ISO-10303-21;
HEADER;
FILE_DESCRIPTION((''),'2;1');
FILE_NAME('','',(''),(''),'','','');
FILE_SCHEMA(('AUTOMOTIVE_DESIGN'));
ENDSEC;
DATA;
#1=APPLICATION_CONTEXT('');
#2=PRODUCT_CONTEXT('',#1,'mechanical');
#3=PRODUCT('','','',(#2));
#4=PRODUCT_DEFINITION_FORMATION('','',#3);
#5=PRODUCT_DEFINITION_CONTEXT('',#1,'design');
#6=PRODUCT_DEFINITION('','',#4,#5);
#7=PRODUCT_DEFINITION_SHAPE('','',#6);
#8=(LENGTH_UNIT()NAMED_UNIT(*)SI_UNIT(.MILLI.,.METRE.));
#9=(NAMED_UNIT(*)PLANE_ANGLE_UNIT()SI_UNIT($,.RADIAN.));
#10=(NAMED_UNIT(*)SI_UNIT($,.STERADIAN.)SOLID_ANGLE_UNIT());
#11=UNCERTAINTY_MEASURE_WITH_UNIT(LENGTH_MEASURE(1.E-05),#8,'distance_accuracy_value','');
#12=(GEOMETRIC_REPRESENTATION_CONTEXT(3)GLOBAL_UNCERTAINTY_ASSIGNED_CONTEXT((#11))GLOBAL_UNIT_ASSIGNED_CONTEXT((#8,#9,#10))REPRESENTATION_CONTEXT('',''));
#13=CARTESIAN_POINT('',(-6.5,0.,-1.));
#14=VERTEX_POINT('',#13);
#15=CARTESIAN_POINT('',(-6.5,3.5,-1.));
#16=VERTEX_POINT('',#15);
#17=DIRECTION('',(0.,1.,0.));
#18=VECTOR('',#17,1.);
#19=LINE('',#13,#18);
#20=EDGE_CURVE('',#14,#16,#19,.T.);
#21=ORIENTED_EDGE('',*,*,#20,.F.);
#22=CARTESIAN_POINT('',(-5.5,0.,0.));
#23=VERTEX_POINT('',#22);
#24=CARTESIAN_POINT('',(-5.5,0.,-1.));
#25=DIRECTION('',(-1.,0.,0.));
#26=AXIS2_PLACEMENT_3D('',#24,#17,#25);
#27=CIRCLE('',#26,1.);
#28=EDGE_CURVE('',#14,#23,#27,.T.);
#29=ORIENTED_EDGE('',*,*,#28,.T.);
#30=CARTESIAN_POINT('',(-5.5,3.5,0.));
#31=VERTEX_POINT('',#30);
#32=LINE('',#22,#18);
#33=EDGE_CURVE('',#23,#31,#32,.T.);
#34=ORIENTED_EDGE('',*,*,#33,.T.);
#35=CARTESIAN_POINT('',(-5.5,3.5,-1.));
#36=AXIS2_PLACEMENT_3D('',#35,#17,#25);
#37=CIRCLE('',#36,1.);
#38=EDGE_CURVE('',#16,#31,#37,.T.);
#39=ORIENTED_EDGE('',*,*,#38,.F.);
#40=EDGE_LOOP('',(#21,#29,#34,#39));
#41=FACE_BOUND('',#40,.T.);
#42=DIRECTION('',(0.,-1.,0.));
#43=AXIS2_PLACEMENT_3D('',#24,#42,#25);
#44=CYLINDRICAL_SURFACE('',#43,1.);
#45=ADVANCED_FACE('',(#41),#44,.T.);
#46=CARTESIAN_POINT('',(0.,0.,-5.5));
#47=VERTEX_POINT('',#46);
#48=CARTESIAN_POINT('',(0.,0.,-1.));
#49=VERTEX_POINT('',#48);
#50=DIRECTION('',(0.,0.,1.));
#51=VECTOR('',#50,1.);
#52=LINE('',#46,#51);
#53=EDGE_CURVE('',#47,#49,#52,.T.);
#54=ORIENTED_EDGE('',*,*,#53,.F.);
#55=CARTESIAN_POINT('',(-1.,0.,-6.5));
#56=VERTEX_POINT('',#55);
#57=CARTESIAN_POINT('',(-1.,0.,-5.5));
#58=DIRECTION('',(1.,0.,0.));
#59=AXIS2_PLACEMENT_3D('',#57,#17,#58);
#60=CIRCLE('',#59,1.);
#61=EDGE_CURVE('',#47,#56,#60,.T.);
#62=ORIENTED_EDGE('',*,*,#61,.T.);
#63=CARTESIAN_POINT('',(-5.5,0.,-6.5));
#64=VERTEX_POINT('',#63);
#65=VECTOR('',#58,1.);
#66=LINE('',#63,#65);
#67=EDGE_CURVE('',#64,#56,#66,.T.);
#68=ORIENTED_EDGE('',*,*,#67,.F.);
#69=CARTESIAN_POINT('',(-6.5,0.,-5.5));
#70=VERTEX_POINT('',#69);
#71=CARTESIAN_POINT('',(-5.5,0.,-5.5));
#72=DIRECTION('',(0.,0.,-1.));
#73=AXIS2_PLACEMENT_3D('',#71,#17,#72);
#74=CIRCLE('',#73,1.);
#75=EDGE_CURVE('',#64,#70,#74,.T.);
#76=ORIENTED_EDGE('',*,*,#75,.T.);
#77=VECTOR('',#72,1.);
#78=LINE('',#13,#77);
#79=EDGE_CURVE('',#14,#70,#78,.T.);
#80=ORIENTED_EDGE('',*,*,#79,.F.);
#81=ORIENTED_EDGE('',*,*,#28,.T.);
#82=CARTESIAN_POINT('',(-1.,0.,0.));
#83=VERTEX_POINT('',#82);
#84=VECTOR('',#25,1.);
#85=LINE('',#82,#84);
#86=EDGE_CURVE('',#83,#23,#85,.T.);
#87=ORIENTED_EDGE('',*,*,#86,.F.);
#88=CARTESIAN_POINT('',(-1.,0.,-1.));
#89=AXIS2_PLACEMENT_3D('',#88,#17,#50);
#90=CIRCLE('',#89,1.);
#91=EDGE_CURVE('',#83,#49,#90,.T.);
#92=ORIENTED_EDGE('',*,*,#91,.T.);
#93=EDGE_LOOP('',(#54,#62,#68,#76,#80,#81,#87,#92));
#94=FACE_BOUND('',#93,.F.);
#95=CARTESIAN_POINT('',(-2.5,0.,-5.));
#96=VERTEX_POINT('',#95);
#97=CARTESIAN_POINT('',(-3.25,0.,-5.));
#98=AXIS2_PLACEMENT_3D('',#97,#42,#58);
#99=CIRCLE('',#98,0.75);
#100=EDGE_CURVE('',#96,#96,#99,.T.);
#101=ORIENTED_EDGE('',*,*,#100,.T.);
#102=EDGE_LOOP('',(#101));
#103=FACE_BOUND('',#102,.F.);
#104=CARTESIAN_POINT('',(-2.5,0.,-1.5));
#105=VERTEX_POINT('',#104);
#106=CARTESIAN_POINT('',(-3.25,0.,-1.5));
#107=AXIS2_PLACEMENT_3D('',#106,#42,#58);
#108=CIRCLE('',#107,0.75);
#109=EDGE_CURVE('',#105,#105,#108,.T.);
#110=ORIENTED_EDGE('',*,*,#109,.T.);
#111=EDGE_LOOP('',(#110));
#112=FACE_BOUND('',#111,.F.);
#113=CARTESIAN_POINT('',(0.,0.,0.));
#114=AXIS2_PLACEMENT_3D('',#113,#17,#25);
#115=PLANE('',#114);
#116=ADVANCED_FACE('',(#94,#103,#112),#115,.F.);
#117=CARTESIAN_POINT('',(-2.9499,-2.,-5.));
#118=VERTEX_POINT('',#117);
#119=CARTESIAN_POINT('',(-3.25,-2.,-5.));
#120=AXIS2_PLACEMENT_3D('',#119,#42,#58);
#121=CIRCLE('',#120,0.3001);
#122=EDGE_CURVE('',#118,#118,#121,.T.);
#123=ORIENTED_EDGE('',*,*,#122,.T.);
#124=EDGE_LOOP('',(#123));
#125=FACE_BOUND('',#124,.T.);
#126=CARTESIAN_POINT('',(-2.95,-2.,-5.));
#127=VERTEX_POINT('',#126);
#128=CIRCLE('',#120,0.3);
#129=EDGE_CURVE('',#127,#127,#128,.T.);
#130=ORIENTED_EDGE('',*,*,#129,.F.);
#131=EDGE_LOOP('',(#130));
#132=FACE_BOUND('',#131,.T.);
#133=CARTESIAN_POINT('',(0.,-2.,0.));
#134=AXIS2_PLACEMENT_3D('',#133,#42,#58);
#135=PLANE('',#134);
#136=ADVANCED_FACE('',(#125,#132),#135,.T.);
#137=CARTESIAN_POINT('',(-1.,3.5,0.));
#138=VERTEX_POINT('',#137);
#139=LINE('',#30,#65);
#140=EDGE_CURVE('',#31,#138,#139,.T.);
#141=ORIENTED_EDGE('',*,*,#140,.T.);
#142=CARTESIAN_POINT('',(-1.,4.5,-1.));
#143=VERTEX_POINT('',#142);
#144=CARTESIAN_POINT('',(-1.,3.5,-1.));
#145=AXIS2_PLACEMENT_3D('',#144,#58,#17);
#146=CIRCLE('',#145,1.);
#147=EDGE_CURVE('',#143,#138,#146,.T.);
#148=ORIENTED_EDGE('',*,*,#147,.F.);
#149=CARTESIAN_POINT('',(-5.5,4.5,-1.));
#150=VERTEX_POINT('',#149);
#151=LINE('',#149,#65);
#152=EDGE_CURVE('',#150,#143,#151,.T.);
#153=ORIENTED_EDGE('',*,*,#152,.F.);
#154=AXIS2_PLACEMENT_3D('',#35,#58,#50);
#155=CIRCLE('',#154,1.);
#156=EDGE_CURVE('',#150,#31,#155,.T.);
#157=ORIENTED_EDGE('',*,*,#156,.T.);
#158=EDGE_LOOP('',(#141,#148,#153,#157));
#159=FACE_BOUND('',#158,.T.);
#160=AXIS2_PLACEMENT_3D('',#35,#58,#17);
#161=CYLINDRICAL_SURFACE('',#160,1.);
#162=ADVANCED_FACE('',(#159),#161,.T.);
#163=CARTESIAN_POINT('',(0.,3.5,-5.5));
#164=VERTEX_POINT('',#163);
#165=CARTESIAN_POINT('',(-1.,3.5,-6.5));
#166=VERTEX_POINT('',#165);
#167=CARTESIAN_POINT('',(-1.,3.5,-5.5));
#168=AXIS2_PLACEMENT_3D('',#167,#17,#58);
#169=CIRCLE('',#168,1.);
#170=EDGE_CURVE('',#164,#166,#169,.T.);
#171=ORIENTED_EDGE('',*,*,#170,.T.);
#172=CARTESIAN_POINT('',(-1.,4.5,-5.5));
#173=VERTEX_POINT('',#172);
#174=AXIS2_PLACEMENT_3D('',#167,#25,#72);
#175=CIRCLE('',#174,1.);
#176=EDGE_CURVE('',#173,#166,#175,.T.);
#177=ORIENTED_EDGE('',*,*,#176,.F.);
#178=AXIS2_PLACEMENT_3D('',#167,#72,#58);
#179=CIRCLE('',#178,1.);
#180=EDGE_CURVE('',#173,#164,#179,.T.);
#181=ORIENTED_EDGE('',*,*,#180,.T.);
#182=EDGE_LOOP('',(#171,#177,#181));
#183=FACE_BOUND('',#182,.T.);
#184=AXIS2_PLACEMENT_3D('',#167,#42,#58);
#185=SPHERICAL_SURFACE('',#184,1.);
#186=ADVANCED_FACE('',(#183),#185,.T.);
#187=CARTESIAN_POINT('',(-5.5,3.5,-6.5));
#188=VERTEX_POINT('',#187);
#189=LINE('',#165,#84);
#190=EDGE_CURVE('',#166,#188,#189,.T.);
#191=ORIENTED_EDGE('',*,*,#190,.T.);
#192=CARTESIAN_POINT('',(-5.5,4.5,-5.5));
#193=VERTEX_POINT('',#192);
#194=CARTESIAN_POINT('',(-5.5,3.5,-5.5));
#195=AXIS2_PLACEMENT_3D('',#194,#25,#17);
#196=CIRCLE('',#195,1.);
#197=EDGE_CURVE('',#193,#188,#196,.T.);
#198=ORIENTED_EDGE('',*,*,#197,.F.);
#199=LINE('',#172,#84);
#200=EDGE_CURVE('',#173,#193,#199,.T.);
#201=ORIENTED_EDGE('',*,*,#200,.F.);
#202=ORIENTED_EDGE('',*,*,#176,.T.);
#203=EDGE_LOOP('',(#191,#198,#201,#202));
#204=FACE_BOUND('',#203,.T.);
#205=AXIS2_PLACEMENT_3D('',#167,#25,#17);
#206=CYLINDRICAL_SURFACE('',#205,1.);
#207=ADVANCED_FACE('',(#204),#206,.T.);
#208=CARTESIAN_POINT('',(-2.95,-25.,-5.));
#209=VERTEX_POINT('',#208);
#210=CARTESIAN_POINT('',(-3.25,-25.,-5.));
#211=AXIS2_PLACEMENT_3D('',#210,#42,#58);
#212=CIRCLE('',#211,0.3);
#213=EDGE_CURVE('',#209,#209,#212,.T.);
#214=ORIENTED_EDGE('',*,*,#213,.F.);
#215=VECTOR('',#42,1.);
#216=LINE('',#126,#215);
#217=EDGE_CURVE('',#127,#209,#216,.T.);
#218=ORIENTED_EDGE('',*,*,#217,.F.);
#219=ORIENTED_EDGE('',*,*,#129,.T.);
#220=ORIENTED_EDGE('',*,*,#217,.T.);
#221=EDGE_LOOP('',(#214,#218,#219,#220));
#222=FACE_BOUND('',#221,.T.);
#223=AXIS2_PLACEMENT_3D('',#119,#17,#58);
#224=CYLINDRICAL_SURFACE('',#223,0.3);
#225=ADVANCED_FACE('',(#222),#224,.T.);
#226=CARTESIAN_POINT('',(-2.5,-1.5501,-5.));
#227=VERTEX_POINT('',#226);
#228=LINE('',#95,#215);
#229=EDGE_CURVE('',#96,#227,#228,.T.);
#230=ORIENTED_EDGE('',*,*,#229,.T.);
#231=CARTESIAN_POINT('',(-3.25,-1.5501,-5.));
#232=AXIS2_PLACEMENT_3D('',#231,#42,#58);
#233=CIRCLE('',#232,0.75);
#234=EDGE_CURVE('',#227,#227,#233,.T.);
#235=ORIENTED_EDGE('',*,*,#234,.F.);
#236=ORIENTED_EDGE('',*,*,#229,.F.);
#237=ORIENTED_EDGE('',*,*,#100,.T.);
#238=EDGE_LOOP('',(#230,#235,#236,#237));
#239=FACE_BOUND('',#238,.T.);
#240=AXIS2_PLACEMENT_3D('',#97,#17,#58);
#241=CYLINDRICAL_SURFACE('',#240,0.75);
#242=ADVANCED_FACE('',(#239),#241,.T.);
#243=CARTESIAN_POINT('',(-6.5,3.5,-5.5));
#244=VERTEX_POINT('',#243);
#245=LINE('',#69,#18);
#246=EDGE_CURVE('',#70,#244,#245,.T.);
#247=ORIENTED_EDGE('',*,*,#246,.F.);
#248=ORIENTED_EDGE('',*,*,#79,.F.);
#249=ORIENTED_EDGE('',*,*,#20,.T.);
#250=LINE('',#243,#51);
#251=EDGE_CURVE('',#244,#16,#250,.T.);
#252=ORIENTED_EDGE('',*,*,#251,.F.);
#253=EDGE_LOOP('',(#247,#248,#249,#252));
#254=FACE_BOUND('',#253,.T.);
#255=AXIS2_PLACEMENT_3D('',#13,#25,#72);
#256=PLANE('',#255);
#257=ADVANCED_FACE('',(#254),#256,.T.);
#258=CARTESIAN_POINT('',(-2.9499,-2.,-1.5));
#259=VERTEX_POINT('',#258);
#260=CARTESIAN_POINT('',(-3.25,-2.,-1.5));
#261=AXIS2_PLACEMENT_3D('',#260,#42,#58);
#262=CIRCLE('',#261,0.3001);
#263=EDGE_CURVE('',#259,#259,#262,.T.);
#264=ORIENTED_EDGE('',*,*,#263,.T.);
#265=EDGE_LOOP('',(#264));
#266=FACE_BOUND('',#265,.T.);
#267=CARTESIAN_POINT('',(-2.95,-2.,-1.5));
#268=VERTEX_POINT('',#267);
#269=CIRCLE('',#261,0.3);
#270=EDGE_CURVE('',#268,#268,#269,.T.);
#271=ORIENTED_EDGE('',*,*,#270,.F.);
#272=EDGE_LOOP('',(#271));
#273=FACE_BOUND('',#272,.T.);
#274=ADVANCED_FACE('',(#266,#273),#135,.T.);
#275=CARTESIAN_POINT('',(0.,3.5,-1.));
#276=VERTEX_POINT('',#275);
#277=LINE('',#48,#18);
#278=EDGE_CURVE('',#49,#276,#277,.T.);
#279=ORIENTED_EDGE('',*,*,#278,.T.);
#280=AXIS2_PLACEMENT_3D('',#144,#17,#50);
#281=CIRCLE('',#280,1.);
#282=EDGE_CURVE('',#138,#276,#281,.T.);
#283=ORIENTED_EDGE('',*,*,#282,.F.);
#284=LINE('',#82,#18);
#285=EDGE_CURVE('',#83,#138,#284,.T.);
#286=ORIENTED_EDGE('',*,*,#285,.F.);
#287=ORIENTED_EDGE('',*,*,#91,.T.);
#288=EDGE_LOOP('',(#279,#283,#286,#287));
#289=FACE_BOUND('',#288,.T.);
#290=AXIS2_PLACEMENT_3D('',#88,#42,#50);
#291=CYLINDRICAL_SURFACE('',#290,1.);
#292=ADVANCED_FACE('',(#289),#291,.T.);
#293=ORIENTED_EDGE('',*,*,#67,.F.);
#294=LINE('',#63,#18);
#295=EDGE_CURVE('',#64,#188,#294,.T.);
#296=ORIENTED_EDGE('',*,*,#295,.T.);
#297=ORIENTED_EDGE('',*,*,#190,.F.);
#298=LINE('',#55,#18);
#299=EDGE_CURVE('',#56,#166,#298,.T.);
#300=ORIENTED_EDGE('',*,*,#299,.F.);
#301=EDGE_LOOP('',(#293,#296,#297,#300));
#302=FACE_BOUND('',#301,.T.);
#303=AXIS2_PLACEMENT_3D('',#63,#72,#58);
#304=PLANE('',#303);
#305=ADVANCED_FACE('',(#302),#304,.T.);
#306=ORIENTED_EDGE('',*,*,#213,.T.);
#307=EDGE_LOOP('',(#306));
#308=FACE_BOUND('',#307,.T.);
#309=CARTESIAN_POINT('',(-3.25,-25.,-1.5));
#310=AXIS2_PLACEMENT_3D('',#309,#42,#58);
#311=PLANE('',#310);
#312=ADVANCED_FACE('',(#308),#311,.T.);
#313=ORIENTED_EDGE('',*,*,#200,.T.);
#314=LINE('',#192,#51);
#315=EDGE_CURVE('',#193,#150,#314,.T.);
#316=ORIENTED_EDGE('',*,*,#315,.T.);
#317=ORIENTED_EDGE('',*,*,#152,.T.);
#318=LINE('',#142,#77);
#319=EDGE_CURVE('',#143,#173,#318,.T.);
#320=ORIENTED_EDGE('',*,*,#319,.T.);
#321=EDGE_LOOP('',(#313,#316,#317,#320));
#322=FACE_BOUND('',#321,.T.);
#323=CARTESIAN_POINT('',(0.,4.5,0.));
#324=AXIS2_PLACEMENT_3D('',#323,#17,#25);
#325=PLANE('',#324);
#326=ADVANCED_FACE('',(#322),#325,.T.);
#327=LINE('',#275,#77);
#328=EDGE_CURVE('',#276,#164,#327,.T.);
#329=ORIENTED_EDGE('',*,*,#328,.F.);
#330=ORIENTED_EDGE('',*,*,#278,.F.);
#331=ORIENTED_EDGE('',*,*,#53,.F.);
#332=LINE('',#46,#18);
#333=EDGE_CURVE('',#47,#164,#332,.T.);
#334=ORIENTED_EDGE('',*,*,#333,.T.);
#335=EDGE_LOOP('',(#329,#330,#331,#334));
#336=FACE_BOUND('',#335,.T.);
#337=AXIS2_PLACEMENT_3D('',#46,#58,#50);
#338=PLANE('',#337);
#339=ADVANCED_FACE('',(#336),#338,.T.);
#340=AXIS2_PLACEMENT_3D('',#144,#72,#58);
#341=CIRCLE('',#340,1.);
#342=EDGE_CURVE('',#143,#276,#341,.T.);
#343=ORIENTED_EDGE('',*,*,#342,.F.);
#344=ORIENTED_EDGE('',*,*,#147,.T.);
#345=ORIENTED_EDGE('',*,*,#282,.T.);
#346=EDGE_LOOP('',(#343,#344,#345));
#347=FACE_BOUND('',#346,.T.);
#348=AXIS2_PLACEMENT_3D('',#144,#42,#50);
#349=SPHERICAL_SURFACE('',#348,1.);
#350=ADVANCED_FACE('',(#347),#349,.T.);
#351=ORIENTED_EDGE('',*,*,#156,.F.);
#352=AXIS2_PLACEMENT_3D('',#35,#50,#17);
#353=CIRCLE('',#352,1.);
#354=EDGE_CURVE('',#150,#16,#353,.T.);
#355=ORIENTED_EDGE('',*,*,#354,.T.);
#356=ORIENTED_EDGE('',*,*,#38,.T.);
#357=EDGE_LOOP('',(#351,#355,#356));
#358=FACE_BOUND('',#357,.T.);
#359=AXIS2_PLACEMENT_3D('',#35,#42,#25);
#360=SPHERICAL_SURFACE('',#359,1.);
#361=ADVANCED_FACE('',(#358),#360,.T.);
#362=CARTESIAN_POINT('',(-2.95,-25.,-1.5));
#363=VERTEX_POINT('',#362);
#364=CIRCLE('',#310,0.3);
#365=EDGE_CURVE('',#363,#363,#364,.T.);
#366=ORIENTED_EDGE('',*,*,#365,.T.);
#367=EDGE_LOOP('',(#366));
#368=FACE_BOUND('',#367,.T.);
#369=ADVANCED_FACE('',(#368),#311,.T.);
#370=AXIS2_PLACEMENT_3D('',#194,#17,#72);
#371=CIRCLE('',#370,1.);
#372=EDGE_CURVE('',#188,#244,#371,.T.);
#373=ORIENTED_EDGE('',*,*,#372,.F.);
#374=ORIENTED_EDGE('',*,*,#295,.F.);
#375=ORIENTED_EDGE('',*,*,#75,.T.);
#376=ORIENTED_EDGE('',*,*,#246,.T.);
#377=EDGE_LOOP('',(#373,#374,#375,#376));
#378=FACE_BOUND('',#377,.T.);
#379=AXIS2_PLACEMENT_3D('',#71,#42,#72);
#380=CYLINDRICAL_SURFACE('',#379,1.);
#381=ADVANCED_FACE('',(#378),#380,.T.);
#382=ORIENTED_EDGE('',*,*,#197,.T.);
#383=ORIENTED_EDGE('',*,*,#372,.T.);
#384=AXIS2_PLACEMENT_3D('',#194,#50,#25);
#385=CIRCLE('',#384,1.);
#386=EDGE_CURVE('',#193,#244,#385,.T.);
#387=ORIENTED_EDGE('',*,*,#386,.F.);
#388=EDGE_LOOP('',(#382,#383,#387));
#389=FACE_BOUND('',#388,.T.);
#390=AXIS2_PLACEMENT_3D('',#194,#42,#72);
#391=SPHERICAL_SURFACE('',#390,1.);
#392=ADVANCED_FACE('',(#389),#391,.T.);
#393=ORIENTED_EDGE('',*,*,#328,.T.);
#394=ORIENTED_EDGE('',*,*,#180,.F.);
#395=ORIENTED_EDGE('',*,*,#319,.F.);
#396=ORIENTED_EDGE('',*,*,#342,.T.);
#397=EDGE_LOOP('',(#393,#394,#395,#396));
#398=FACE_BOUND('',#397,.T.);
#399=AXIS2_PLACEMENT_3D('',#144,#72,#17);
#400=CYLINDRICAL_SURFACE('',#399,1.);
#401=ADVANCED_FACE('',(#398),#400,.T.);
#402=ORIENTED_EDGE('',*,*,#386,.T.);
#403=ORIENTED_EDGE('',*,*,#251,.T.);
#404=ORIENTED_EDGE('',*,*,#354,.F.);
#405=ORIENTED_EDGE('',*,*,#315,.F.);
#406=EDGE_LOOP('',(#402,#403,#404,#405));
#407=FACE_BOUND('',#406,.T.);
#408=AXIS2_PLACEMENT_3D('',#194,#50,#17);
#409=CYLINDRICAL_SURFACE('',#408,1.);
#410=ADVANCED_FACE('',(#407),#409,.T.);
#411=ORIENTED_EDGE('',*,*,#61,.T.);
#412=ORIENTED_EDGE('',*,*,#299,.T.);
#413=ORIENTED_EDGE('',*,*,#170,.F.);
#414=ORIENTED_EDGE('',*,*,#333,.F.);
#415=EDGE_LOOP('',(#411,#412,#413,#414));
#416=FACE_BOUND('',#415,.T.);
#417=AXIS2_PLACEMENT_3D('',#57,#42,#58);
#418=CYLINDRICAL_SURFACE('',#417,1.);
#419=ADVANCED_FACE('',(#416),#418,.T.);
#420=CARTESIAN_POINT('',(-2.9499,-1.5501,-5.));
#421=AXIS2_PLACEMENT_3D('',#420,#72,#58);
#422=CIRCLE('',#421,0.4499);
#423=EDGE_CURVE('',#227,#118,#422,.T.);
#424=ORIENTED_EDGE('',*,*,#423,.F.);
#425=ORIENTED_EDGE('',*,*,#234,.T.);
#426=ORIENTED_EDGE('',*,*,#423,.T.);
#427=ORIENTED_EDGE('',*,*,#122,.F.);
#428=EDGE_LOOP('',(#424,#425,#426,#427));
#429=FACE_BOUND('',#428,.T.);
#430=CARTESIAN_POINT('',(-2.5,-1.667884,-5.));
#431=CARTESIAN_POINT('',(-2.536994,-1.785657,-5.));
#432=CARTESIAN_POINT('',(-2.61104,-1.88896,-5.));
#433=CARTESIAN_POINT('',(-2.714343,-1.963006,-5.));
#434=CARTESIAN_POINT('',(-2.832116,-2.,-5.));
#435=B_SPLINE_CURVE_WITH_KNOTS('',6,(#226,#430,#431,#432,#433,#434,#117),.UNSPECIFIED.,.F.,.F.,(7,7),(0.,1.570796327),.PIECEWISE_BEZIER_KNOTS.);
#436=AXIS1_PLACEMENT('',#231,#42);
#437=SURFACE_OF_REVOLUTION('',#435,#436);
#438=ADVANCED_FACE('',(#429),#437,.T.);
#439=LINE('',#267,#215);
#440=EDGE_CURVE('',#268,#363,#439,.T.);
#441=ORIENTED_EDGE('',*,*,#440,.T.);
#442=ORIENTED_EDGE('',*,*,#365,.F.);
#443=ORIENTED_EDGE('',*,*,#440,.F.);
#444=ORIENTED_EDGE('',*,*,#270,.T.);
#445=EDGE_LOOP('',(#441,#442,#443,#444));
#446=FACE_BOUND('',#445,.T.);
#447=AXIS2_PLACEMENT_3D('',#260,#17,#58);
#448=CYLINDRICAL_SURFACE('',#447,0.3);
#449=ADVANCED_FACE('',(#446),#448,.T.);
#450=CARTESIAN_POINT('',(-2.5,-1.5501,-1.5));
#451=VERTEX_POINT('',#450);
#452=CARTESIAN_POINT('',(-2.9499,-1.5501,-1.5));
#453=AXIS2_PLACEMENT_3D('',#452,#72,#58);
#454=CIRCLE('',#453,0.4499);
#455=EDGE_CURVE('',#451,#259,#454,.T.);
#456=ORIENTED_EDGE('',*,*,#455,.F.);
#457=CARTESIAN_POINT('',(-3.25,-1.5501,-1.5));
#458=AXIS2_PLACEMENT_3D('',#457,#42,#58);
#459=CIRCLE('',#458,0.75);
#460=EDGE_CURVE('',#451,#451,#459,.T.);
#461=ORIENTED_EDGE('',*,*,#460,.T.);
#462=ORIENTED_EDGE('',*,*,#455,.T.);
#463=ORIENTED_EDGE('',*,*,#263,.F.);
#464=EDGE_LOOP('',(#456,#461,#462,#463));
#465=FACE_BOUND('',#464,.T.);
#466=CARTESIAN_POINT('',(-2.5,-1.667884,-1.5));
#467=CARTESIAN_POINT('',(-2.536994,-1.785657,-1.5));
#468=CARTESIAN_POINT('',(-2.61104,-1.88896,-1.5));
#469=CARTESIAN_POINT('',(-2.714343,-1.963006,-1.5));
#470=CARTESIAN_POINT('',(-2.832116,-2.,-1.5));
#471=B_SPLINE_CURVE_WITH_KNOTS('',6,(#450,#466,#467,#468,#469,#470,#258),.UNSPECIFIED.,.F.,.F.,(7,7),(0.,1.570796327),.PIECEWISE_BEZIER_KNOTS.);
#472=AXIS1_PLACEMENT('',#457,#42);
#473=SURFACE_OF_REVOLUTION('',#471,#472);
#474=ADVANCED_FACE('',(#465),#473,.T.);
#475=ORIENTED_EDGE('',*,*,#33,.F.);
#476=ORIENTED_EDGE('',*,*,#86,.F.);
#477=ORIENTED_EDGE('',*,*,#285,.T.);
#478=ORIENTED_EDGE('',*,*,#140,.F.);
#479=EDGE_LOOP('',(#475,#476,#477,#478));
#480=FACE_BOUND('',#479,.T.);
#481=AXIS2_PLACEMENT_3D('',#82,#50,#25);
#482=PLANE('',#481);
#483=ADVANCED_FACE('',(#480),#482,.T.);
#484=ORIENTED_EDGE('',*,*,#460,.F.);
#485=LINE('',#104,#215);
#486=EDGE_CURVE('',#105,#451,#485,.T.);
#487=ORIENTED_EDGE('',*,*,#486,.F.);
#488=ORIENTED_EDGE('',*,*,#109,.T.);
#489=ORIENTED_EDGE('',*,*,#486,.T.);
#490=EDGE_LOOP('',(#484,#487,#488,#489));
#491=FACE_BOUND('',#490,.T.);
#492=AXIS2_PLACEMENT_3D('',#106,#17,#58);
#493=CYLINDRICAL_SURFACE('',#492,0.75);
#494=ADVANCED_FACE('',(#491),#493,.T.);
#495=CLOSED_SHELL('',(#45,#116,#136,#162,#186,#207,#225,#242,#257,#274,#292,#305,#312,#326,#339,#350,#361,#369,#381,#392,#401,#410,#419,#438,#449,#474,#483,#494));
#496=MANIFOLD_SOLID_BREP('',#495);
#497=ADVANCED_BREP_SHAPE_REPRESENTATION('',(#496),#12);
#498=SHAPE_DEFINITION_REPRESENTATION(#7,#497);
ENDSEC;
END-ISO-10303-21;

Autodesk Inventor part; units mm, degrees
ref_plane "YZ Plane" through (0, 0, 0) normal (1, 0, 0) x (0, 1, 0)
ref_plane "XZ Plane" through (0, 0, 0) normal (0, 1, 0) x (-1, 0, 0)
ref_plane "XY Plane" through (0, 0, 0) normal (0, 0, 1) x (1, 0, 0)
sketch "Sketch1" plane through (0, 0, 0) normal (0, 1, 0) x (-1, 0, 0)
  line L0 (1, 0) -> (5.5, 0)
  line L1 (6.5, -1) -> (6.5, -5.5)
  line L2 (5.5, -6.5) -> (1, -6.5)
  line L3 (0, -5.5) -> (0, -1)
  arc A0 (6.5, -1) -> (5.5, 0) centre (5.5, -1) ccw
  arc A1 (0, -5.5) -> (1, -6.5) centre (1, -5.5) ccw
  arc A2 (5.5, -6.5) -> (6.5, -5.5) centre (5.5, -5.5) ccw
  arc A3 (1, 0) -> (0, -1) centre (1, -1) ccw
  circle A4 centre (3.25, -5) radius 0.75
  circle A5 centre (3.25, -1.5) radius 0.75
  point P0 (0, 0)
  point P1 (6.5, -6.5)
  point P2 (6.5, 0)
  point P3 (0, -6.5)
  dimension "d0" = 6.5
  dimension "d1" = 6.5
  dimension "d2" = 1
  dimension "d5" = 1.5
  dimension "d7" = 1.5
extrude "Extrusion1" add sketch "Sketch1" along normal blind 4.5 contours L0 A0 L1 A2 L2 A1 L3 A3 | A4 | A5
fillet "Fillet1" radius 1 8 edges at (-0.2929, 4.5, -6.2071) (-3.25, 4.5, -6.5) (-6.2071, 4.5, -6.2071) (-6.5, 4.5, -3.25) (-6.2071, 4.5, -0.2929) (-3.25, 4.5, 0) (-0.2929, 4.5, -0.2929) (0, 4.5, -3.25)
sketch "Sketch2" plane through (0, 0, 0) normal (0, -1, 0) x (1, 0, 0)
  circle A0 centre (-3.25, -1.5) radius 0.75
  circle A1 centre (-3.25, -5) radius 0.75
  point P0 (0, 0)
  dimension "d13" = 1.5
  dimension "d14" = 1.5
extrude "Extrusion2" add sketch "Sketch2" along normal blind 2
sketch "Sketch3" plane through (-3.25, -2, -1.5) normal (0, -1, 0) x (1, 0, 0)
  circle A0 centre (0, 0) radius 0.3
  circle A1 centre (0, -3.5) radius 0.75 projected
  circle A2 centre (0, -3.5) radius 0.3
  point P0 (3.25, 1.5)
  dimension "d17" = 0.6
  dimension "d18" = 0.6
extrude "Extrusion3" add sketch "Sketch3" along normal blind 23 contours A0 | A2
fillet "Fillet2" radius 0.45 2 edges at (-4, -2, -1.5) (-4, -2, -5)
equation "\"BendRadius\" = Thickness"
equation "\"BendReliefWidth\" = Thickness"
equation "\"BendReliefDepth\" = 0.5 * Thickness"
equation "\"CornerReliefSize\" = 4 * Thickness"
equation "\"MinimumRemnant\" = 2 * Thickness"
equation "\"TransitionRadius\" = BendRadius"
equation "\"JacobiRadiusSize\" = BendRadius"
equation "\"GapSize\" = Thickness"
equation "\"Thickness\" = 3.048"
